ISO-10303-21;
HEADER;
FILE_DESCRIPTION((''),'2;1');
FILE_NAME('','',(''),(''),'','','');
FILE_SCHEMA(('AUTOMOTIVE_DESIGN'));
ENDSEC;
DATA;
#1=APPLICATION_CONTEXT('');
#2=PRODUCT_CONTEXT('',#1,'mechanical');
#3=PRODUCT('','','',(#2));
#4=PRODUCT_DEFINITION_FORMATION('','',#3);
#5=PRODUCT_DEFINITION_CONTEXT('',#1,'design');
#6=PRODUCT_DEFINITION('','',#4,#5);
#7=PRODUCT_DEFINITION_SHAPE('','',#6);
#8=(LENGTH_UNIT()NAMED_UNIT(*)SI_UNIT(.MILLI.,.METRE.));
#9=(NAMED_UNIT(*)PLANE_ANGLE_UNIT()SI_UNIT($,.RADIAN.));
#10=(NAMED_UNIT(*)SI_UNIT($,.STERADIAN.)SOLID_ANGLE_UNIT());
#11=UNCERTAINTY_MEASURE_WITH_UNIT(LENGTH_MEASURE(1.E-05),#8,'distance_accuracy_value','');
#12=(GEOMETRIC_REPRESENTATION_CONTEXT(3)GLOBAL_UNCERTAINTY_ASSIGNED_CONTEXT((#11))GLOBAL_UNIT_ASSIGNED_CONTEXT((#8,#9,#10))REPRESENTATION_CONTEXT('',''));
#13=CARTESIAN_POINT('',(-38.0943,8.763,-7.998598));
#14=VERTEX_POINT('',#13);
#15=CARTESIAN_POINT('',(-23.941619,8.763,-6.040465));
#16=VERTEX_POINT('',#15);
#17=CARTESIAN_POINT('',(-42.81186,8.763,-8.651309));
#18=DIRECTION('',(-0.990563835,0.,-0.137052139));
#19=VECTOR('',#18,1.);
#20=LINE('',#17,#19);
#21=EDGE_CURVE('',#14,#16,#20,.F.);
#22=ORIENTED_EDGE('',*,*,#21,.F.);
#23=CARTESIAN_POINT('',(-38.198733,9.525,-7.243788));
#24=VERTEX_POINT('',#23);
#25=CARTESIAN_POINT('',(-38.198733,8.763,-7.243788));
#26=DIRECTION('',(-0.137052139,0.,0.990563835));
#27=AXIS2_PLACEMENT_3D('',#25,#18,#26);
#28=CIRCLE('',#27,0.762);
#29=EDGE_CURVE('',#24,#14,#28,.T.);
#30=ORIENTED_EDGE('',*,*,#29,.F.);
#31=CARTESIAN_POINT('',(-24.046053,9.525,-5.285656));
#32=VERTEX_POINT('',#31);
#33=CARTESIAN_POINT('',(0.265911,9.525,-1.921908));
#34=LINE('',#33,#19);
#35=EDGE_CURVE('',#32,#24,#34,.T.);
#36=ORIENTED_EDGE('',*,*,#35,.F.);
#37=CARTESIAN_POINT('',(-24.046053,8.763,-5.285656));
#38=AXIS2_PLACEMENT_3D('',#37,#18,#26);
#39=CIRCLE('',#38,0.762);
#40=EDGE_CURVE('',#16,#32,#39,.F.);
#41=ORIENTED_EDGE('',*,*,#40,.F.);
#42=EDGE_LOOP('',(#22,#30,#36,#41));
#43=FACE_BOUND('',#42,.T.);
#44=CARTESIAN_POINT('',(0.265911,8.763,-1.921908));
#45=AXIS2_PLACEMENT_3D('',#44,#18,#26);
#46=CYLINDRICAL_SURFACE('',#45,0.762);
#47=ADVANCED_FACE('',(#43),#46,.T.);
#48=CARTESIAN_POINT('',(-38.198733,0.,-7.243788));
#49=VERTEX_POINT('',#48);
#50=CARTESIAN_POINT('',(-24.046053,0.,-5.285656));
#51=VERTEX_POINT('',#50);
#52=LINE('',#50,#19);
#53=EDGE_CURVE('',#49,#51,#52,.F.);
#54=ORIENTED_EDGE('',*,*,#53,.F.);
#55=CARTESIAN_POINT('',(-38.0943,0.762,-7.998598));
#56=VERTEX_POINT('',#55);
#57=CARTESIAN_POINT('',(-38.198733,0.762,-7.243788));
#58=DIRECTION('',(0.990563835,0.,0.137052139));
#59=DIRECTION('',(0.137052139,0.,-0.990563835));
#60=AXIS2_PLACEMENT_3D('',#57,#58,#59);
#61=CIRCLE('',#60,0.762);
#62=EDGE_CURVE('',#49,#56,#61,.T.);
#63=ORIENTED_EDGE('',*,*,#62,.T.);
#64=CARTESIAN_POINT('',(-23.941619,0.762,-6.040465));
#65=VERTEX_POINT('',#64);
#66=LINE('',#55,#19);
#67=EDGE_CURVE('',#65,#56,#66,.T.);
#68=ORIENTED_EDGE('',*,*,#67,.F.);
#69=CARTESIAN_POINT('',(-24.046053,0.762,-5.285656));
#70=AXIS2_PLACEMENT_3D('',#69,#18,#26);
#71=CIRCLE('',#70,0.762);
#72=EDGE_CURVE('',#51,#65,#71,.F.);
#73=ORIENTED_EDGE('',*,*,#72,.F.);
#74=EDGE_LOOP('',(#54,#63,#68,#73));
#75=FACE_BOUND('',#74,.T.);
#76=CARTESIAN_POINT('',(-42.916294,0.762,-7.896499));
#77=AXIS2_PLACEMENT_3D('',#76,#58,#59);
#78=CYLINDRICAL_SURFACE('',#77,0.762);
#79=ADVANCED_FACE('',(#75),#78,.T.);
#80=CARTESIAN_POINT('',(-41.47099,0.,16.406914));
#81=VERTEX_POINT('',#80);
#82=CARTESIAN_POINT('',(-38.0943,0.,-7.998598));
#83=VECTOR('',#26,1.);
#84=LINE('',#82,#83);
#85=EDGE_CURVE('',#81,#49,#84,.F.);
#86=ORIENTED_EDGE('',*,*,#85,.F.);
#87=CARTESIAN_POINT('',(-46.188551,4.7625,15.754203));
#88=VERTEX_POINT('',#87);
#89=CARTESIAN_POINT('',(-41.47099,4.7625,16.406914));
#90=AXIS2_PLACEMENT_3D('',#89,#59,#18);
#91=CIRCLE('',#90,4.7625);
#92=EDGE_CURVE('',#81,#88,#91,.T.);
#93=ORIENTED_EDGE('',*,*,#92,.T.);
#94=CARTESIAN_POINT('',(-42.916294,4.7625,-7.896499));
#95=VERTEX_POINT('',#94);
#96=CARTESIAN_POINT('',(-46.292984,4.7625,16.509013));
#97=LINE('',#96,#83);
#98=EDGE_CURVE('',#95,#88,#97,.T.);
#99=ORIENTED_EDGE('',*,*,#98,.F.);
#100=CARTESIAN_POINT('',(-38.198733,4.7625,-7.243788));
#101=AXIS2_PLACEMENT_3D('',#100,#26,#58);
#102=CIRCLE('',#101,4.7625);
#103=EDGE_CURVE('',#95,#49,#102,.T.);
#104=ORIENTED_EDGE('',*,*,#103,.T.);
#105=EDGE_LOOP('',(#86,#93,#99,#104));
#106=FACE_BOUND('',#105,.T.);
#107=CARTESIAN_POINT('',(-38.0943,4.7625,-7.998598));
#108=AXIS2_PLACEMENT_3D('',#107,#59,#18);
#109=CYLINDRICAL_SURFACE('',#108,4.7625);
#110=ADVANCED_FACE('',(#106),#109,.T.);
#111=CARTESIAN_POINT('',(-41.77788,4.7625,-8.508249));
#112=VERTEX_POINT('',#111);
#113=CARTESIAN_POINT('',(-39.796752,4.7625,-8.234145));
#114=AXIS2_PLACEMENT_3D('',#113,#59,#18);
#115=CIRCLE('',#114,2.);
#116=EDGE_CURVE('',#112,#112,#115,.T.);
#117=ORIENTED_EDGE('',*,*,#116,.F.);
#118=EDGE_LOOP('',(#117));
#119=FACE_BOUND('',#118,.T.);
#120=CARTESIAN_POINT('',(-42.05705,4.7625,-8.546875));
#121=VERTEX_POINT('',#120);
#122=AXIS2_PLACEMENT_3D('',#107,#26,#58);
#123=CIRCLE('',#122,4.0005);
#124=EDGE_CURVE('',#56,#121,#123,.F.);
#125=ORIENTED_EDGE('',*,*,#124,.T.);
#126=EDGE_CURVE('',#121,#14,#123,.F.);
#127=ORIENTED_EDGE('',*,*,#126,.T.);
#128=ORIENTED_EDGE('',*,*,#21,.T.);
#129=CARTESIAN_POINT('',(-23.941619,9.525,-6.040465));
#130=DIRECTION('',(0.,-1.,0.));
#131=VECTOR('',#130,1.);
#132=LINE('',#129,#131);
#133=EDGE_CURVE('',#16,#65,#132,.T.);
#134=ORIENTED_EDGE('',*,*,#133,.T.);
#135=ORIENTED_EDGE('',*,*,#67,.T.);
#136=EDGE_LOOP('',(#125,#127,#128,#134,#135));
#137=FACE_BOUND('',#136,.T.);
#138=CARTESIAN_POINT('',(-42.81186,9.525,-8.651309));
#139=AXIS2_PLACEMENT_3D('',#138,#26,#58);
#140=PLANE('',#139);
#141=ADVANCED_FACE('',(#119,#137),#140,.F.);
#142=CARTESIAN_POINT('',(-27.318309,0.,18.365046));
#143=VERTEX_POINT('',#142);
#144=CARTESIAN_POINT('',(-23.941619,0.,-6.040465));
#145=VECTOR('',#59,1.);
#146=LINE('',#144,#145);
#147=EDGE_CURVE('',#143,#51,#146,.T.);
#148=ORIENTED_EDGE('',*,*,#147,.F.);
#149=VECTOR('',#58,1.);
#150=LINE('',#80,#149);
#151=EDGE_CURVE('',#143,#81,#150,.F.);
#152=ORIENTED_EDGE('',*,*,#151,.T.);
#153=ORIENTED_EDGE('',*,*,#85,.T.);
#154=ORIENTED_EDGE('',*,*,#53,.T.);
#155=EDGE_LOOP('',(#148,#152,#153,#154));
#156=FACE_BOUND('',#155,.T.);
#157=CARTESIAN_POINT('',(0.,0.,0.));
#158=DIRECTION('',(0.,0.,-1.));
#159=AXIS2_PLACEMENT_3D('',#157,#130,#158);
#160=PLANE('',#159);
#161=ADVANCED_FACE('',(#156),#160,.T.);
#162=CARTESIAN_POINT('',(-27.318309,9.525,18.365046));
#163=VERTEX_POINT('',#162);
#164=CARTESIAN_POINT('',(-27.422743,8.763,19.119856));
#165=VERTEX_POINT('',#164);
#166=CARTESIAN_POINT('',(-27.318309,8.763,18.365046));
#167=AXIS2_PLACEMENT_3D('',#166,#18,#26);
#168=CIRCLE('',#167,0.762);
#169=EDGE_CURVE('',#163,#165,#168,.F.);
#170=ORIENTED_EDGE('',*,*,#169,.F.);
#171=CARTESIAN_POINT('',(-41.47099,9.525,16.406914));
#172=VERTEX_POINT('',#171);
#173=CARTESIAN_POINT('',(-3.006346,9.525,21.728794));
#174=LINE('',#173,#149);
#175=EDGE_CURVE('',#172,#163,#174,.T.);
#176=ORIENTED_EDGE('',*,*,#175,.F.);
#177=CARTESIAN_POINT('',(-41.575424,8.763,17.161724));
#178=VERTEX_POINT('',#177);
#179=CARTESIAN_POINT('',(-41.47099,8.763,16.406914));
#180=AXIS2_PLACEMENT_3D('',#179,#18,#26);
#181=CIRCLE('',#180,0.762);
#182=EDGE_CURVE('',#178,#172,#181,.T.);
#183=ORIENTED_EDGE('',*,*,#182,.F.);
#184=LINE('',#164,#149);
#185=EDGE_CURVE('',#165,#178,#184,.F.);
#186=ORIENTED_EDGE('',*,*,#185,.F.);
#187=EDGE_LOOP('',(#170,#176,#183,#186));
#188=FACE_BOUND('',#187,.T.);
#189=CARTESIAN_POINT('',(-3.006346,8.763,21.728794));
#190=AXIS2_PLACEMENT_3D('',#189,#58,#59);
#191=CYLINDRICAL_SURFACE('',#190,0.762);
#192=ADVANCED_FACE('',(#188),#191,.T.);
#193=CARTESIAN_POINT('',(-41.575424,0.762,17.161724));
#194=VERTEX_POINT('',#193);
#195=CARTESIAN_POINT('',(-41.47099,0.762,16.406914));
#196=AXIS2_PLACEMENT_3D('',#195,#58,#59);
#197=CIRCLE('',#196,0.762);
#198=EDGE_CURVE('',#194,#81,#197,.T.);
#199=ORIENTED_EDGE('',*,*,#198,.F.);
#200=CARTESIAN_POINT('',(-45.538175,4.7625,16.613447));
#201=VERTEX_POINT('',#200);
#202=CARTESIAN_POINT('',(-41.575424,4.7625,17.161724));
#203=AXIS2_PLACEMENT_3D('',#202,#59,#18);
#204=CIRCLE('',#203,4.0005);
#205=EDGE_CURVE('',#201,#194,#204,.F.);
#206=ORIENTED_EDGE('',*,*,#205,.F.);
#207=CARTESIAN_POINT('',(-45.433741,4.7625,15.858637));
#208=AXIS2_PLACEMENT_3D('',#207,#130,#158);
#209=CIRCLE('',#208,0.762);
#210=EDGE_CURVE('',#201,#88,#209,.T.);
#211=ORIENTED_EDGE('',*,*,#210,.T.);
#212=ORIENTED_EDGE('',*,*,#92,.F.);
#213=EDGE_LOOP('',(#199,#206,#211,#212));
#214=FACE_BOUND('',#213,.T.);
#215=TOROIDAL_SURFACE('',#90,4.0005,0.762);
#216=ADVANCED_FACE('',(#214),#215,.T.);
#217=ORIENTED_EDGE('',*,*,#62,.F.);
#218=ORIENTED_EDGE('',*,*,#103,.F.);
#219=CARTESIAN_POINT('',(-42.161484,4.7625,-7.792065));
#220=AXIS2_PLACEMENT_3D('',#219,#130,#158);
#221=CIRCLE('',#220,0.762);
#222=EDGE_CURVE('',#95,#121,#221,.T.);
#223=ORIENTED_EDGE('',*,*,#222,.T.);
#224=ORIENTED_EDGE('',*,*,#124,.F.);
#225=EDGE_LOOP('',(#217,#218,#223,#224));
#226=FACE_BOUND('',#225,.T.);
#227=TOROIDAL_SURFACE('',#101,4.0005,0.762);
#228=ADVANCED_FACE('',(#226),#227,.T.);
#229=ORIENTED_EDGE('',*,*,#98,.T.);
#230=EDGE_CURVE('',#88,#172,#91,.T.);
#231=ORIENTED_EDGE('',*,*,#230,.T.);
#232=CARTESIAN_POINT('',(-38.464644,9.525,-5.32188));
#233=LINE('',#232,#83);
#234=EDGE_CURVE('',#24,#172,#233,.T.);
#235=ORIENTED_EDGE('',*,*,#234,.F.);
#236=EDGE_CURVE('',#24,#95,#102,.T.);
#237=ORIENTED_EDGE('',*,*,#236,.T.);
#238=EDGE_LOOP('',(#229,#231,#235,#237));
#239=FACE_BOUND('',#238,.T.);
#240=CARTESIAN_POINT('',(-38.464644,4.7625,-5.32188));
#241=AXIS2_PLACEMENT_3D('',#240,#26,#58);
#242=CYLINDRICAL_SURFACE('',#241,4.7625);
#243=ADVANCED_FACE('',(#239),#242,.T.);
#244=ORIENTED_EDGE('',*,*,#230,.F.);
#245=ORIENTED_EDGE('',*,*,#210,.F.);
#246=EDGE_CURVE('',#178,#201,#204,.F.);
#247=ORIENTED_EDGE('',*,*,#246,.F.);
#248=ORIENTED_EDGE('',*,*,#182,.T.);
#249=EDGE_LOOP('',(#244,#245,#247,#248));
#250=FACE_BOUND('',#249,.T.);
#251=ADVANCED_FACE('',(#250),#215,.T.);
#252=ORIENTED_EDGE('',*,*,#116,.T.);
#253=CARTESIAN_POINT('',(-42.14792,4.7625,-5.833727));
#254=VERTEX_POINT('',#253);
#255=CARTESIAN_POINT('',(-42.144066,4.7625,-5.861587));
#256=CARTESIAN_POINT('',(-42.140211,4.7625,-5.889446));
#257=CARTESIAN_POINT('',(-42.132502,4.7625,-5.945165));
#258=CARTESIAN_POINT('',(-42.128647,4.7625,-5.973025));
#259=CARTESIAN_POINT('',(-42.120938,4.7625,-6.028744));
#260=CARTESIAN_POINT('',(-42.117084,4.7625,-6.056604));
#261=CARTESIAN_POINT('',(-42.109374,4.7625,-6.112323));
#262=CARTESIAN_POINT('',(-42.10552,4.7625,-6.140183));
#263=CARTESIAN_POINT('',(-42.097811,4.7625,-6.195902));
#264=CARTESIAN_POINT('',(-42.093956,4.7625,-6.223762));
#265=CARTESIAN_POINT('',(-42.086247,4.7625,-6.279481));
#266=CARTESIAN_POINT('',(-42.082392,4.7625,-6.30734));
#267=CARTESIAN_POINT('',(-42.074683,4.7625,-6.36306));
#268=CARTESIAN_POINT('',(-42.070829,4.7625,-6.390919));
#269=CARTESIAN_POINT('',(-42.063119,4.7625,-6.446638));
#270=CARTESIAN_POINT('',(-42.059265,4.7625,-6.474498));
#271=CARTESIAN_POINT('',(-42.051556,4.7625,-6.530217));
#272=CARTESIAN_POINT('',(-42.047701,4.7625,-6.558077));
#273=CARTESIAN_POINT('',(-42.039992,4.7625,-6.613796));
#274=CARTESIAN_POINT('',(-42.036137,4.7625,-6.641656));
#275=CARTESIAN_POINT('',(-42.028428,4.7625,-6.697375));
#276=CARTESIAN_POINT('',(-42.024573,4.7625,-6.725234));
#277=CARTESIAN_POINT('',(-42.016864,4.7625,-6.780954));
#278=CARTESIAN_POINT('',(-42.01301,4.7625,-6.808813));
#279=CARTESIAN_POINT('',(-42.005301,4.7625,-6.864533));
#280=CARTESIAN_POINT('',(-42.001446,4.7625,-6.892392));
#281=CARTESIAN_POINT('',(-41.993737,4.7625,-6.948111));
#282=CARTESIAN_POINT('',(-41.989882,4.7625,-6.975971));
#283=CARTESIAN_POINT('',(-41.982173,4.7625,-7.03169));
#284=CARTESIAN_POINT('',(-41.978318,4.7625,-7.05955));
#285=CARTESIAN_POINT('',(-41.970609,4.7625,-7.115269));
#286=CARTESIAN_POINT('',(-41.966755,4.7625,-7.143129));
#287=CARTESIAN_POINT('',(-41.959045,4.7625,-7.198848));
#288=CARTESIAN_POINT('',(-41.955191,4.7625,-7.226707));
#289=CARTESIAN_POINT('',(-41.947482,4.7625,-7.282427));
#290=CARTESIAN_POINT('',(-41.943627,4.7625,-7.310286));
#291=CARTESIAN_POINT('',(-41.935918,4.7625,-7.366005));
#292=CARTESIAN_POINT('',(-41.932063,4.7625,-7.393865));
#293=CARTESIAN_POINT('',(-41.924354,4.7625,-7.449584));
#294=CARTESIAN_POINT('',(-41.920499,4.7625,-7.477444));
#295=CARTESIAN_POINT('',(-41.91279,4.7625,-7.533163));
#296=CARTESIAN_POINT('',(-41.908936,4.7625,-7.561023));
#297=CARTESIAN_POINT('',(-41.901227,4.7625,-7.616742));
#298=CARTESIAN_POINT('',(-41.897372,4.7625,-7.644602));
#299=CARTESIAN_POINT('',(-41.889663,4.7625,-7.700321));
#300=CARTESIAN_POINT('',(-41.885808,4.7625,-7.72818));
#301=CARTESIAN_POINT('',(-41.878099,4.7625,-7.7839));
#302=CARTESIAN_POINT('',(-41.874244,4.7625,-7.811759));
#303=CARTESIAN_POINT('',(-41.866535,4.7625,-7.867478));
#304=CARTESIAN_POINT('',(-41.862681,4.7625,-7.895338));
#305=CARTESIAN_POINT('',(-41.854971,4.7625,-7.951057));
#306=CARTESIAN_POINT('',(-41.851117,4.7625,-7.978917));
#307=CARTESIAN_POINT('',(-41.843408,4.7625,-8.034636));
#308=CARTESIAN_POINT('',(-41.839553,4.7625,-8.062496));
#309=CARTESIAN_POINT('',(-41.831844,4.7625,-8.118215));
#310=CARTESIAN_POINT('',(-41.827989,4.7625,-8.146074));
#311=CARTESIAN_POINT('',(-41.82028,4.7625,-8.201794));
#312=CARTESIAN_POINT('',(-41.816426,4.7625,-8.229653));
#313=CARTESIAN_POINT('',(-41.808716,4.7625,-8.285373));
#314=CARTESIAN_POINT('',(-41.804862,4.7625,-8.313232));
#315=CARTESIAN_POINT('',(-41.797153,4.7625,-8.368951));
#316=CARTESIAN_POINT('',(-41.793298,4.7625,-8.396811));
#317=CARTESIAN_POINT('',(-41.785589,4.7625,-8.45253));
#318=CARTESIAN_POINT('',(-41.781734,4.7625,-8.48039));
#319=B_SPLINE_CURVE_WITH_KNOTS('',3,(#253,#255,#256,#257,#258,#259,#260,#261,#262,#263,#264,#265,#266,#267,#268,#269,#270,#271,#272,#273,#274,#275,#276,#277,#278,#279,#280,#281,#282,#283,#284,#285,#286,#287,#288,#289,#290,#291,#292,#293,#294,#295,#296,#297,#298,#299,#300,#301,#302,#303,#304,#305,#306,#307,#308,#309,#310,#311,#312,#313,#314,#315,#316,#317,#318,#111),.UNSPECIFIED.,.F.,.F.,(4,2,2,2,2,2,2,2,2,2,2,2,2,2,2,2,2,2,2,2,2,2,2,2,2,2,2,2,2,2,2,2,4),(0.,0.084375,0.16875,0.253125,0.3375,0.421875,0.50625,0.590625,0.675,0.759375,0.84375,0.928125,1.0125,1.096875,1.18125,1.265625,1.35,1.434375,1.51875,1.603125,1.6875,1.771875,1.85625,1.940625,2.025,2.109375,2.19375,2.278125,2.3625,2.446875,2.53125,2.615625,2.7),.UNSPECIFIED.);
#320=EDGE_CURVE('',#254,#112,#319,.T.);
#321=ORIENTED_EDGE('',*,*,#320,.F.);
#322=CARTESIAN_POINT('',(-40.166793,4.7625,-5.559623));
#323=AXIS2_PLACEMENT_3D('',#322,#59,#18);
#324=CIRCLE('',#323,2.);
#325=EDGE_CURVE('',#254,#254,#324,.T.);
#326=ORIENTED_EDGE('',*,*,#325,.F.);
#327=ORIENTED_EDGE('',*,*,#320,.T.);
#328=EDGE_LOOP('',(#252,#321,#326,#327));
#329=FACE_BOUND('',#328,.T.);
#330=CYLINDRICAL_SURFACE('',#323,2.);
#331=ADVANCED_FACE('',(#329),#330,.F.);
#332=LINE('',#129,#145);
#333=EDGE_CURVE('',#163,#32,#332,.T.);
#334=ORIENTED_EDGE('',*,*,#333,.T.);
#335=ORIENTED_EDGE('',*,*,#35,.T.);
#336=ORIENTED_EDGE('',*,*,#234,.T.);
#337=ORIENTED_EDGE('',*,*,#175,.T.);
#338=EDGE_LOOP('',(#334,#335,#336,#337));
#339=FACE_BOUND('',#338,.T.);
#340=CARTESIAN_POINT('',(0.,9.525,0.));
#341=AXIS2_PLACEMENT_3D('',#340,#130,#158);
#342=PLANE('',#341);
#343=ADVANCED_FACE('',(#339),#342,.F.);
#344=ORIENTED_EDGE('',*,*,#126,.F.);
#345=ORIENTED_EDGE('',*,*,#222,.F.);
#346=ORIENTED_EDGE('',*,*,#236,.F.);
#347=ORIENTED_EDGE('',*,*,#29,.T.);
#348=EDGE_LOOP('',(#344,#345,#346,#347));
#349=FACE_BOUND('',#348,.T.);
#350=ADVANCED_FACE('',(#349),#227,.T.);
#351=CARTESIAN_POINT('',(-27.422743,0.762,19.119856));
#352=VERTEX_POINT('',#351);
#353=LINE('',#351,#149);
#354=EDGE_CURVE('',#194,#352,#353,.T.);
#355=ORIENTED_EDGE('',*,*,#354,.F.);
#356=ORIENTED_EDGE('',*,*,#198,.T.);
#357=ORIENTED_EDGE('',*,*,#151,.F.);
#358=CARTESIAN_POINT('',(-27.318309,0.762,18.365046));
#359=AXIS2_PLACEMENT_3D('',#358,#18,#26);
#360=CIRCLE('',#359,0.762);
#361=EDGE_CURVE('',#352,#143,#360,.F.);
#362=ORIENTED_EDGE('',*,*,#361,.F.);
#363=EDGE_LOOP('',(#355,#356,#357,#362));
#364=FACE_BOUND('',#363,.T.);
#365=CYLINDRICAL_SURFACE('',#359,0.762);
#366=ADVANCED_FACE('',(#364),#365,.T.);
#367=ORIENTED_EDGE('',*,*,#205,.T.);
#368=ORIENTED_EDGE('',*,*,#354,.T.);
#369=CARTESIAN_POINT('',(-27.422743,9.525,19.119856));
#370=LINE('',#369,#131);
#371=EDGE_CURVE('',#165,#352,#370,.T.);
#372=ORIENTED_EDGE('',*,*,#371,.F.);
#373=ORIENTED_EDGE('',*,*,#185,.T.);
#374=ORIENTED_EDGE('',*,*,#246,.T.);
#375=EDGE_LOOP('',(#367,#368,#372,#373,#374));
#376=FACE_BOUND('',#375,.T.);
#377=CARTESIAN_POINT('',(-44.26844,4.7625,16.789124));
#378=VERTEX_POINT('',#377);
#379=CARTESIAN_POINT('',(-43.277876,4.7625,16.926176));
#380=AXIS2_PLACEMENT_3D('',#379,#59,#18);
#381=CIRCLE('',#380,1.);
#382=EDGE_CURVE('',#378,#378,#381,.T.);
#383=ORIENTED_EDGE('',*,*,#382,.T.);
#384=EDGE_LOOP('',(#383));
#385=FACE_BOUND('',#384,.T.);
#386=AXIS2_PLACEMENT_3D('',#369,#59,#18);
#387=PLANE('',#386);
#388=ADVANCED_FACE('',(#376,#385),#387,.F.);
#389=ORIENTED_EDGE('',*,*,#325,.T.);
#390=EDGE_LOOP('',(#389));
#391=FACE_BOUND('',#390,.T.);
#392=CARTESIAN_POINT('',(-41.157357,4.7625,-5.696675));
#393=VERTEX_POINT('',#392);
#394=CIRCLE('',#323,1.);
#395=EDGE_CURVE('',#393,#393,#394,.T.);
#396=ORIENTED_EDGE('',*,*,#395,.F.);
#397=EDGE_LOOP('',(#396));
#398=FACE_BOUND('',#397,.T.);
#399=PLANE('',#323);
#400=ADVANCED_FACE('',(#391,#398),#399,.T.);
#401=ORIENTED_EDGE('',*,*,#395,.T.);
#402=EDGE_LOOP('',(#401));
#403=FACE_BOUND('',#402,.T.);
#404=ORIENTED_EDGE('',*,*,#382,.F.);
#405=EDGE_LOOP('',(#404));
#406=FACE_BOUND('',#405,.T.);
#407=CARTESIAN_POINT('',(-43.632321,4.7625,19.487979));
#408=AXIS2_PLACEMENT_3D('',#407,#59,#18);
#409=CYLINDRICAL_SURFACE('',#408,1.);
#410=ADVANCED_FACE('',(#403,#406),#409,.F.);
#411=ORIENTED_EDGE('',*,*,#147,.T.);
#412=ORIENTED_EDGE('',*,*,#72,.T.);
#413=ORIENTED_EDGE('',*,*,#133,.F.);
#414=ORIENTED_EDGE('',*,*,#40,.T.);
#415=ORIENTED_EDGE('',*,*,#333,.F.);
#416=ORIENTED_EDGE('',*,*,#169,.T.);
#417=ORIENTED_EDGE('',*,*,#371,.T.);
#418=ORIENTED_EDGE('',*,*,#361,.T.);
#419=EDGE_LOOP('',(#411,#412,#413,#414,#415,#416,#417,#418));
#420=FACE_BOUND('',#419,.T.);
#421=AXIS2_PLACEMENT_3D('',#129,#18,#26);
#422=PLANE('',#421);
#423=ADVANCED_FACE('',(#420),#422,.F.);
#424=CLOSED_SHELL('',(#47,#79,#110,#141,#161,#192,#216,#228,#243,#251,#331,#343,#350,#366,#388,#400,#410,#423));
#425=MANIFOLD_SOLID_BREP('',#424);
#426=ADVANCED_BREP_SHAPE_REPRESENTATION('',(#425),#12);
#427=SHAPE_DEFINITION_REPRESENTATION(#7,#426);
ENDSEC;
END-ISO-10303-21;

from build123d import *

# Parameters (mm, degrees)
BOSS_EXTRUDE1_DEPTH = 9.525
SKETCH3_R           = 2
CUT_EXTRUDE1_DEPTH  = 2.7
SKETCH4_R           = 1
CUT_EXTRUDE2_DEPTH  = 51.984772229
FILLET2_R           = 4.7625
FILLET3_R           = 0.762


with BuildPart() as part:
    # Sketch1 → Boss-Extrude1 (new body)
    with BuildSketch(Plane(origin=(0, 0, 0), x_dir=(1, 0, 0), z_dir=(0, 1, 0))):
        Polygon((-27.422743224, -19.119856123), (-46.29298428, -16.509012872), (-42.811859946, 8.651308536), (-23.941618889, 6.040465285), align=None)
    extrude(amount=BOSS_EXTRUDE1_DEPTH)

    # Sketch3 → Cut-Extrude1 (cut)
    with BuildSketch(Plane(origin=(0.316670388, 0, -2.684144047), x_dir=(-0.9905638349724136, 0, -0.13705213914691383), z_dir=(0.13705213914691383, 0, -0.9905638349724136))):
        with Locations((40.495544979, 4.7625)):
            Circle(SKETCH3_R)
    extrude(amount=-CUT_EXTRUDE1_DEPTH, mode=Mode.SUBTRACT)

    # Sketch4 → Cut-Extrude2 (cut, through all)
    with BuildSketch(Plane(origin=(0.000303759, 0, -0.00219546), x_dir=(-0.9905638349724136, 0, -0.13705213914691383), z_dir=(0.1370521391469138, 0, -0.9905638349724135))):
        with Locations((40.549730429, 4.7625)):
            Circle(SKETCH4_R)
    extrude(amount=-CUT_EXTRUDE2_DEPTH, mode=Mode.SUBTRACT)

    # Fillet2
    fillet2_edges = [part.edges().sort_by_distance(p)[0] for p in [
        (-44.552422113, 0, 3.928852168),
        (-44.552422113, 9.525, 3.928852168),
    ]]
    fillet(fillet2_edges, radius=FILLET2_R - 0.0001)  # a hair under: the kernel refuses the full size

    # Fillet3
    fillet3_edges = [part.edges().sort_by_distance(p)[0] for p in [
        (-34.499133148, 9.525, 18.140783052),
        (-34.499133148, 0, 18.140783052),
        (-44.911271882, 1.394874665, 16.700183429),
        (-44.911271882, 8.130125335, 16.700183429),
        (-41.430147548, 1.394874665, -8.460137979),
        (-41.430147548, 8.130125335, -8.460137979),
        (-31.018008814, 0, -7.019538357),
        (-31.018008814, 9.525, -7.019538357),
    ]]
    fillet(fillet3_edges, radius=FILLET3_R)


solid = part.part
